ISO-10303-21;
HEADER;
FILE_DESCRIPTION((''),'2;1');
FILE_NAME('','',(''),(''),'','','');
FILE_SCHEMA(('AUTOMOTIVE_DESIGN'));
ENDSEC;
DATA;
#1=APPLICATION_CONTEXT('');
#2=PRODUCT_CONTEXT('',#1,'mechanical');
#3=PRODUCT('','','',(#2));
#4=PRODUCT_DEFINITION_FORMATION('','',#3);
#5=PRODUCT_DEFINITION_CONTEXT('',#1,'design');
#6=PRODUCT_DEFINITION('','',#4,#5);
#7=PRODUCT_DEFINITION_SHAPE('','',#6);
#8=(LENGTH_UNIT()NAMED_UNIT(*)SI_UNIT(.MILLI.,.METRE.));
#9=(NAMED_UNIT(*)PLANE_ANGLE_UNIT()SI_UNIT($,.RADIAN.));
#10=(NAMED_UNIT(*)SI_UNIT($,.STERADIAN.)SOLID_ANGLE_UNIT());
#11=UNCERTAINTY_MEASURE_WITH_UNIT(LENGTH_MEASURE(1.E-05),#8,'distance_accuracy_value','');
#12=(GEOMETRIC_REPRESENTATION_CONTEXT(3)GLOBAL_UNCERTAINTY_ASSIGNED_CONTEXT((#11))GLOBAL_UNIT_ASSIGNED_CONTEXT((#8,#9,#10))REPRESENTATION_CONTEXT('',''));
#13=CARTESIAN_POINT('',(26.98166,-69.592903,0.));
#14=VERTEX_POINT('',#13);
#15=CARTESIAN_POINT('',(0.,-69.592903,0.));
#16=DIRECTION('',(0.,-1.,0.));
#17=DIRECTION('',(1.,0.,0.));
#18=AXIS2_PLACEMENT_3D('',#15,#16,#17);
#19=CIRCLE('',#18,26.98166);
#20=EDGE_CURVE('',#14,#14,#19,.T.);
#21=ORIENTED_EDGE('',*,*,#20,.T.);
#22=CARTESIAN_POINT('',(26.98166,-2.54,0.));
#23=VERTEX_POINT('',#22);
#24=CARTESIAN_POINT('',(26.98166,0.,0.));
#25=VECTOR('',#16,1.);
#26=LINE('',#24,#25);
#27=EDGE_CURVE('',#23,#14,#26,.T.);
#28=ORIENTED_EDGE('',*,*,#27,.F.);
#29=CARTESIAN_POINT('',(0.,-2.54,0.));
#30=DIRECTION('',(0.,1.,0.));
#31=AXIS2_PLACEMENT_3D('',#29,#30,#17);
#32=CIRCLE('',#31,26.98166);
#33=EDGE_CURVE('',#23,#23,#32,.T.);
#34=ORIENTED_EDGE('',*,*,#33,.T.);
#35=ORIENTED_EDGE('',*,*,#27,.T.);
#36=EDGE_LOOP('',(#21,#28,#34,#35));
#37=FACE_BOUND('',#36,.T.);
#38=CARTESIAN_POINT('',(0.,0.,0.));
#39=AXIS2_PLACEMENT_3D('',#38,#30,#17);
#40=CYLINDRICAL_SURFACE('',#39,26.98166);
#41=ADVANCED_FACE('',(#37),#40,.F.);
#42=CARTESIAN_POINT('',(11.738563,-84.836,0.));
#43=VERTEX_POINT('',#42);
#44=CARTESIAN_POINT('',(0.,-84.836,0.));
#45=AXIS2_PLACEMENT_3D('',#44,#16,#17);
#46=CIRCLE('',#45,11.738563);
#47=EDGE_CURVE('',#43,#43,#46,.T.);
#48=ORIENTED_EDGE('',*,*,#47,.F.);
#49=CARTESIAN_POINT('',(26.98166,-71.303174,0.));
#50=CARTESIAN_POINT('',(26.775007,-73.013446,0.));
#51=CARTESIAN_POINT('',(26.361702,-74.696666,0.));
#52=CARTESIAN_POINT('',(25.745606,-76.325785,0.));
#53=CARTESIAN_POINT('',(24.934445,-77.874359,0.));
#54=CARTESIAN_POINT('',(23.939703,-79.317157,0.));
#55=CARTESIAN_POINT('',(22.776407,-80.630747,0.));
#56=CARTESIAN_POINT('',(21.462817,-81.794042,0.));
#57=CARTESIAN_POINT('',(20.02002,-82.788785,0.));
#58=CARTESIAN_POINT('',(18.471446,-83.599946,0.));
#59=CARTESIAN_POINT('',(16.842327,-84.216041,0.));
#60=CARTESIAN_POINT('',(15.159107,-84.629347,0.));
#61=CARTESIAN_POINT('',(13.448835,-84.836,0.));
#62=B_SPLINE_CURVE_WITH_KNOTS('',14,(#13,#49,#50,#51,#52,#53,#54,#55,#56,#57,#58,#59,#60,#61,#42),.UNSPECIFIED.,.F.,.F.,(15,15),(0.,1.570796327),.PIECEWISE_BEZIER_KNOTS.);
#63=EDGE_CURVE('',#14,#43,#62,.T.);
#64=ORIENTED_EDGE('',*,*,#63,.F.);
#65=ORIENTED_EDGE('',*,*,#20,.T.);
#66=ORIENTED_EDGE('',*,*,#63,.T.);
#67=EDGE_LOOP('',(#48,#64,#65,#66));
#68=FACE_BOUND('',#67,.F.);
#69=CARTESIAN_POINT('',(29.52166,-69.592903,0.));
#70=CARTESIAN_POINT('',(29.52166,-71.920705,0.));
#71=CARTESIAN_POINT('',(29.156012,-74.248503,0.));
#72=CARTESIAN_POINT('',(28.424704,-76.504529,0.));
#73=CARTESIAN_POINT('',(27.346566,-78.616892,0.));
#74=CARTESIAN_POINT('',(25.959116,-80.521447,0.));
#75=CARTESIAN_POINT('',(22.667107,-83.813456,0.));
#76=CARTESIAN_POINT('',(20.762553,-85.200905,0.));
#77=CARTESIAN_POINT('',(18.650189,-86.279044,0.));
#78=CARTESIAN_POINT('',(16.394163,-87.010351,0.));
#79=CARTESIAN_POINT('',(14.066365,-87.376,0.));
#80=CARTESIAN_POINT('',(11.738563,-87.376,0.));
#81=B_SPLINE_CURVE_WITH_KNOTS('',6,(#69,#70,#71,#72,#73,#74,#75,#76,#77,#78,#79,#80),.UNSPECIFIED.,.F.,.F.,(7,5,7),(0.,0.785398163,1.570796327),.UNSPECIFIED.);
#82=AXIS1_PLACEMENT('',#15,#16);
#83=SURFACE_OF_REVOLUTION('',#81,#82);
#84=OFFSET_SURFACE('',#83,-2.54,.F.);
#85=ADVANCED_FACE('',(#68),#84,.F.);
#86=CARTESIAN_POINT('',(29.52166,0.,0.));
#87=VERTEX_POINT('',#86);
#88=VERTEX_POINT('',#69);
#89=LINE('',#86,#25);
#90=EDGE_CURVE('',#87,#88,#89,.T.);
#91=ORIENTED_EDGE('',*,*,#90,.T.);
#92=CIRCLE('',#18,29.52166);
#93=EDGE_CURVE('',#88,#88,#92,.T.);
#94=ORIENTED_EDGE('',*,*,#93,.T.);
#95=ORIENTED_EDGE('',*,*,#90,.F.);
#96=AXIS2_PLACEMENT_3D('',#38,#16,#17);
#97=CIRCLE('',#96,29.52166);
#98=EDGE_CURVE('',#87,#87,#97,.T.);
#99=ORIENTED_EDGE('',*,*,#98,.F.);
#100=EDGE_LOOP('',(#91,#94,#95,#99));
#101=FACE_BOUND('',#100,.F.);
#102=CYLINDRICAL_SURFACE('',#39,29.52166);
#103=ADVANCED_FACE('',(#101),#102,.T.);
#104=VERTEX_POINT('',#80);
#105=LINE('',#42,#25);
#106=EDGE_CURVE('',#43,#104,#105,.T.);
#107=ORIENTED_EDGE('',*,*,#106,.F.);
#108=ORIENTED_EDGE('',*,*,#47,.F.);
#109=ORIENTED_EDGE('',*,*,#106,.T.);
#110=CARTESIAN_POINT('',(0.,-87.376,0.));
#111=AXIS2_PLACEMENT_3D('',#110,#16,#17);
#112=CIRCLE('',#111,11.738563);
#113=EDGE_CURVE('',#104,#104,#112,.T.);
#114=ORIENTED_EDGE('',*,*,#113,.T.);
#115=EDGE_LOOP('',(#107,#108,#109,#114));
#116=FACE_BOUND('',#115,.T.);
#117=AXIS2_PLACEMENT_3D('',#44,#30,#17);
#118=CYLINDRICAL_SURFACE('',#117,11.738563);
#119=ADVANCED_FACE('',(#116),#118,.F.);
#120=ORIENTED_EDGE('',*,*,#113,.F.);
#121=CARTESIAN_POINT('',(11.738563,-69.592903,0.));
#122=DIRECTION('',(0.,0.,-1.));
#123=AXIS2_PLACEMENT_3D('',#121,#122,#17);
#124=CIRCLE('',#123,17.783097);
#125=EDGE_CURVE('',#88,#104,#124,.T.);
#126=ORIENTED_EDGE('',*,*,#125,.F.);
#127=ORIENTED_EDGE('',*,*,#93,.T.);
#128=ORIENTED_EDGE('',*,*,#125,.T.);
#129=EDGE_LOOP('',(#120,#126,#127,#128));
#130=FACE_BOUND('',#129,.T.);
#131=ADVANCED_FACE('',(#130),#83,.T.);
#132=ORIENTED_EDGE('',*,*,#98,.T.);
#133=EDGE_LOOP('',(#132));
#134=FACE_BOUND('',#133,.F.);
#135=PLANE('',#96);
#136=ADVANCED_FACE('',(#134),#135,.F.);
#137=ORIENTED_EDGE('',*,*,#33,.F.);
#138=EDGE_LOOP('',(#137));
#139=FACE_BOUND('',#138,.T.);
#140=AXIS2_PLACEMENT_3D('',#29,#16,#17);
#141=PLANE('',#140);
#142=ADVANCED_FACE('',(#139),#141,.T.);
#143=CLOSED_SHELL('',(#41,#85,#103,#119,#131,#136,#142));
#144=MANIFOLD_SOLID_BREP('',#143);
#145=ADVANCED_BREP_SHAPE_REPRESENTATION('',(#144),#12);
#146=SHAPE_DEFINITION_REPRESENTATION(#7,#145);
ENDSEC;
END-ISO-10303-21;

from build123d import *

# Parameters (mm, degrees)
F0_R     = 29.5216604649
F1_DEPTH = 87.376
F2_R     = 17.7830971004
F3_T     = -2.54


# Not quite as in the source:
# - a shell that OpenCascade refuses in one call is made with other operations: the cavity is built on its own and cut out


with BuildPart() as f1:
    # F0 (on Front) → F1 (new body)
    with BuildSketch(Plane.XZ):
        Circle(F0_R)
    extrude(amount=F1_DEPTH)

    # F2
    f2_edges = [f1.edges().sort_by_distance(p)[0] for p in [
        (-29.52166, -87.376, 0),
    ]]
    fillet(f2_edges, radius=F2_R)

    # F3: a shell. OpenCascade refuses it in one call, so the cavity is built on its own and cut out:
    # the body offset inwards by the wall thickness, plus a prism from it out through each open face.
    f3_core = offset(f1.part, amount=F3_T, mode=Mode.PRIVATE)
    f3_exits = [f3_core.faces().sort_by_distance(p)[0] for p in [
        (0, -84.836, 0),
    ]]
    add(f3_core, mode=Mode.SUBTRACT)
    extrude(f3_exits, amount=-F3_T, mode=Mode.SUBTRACT)


solid = f1.part
